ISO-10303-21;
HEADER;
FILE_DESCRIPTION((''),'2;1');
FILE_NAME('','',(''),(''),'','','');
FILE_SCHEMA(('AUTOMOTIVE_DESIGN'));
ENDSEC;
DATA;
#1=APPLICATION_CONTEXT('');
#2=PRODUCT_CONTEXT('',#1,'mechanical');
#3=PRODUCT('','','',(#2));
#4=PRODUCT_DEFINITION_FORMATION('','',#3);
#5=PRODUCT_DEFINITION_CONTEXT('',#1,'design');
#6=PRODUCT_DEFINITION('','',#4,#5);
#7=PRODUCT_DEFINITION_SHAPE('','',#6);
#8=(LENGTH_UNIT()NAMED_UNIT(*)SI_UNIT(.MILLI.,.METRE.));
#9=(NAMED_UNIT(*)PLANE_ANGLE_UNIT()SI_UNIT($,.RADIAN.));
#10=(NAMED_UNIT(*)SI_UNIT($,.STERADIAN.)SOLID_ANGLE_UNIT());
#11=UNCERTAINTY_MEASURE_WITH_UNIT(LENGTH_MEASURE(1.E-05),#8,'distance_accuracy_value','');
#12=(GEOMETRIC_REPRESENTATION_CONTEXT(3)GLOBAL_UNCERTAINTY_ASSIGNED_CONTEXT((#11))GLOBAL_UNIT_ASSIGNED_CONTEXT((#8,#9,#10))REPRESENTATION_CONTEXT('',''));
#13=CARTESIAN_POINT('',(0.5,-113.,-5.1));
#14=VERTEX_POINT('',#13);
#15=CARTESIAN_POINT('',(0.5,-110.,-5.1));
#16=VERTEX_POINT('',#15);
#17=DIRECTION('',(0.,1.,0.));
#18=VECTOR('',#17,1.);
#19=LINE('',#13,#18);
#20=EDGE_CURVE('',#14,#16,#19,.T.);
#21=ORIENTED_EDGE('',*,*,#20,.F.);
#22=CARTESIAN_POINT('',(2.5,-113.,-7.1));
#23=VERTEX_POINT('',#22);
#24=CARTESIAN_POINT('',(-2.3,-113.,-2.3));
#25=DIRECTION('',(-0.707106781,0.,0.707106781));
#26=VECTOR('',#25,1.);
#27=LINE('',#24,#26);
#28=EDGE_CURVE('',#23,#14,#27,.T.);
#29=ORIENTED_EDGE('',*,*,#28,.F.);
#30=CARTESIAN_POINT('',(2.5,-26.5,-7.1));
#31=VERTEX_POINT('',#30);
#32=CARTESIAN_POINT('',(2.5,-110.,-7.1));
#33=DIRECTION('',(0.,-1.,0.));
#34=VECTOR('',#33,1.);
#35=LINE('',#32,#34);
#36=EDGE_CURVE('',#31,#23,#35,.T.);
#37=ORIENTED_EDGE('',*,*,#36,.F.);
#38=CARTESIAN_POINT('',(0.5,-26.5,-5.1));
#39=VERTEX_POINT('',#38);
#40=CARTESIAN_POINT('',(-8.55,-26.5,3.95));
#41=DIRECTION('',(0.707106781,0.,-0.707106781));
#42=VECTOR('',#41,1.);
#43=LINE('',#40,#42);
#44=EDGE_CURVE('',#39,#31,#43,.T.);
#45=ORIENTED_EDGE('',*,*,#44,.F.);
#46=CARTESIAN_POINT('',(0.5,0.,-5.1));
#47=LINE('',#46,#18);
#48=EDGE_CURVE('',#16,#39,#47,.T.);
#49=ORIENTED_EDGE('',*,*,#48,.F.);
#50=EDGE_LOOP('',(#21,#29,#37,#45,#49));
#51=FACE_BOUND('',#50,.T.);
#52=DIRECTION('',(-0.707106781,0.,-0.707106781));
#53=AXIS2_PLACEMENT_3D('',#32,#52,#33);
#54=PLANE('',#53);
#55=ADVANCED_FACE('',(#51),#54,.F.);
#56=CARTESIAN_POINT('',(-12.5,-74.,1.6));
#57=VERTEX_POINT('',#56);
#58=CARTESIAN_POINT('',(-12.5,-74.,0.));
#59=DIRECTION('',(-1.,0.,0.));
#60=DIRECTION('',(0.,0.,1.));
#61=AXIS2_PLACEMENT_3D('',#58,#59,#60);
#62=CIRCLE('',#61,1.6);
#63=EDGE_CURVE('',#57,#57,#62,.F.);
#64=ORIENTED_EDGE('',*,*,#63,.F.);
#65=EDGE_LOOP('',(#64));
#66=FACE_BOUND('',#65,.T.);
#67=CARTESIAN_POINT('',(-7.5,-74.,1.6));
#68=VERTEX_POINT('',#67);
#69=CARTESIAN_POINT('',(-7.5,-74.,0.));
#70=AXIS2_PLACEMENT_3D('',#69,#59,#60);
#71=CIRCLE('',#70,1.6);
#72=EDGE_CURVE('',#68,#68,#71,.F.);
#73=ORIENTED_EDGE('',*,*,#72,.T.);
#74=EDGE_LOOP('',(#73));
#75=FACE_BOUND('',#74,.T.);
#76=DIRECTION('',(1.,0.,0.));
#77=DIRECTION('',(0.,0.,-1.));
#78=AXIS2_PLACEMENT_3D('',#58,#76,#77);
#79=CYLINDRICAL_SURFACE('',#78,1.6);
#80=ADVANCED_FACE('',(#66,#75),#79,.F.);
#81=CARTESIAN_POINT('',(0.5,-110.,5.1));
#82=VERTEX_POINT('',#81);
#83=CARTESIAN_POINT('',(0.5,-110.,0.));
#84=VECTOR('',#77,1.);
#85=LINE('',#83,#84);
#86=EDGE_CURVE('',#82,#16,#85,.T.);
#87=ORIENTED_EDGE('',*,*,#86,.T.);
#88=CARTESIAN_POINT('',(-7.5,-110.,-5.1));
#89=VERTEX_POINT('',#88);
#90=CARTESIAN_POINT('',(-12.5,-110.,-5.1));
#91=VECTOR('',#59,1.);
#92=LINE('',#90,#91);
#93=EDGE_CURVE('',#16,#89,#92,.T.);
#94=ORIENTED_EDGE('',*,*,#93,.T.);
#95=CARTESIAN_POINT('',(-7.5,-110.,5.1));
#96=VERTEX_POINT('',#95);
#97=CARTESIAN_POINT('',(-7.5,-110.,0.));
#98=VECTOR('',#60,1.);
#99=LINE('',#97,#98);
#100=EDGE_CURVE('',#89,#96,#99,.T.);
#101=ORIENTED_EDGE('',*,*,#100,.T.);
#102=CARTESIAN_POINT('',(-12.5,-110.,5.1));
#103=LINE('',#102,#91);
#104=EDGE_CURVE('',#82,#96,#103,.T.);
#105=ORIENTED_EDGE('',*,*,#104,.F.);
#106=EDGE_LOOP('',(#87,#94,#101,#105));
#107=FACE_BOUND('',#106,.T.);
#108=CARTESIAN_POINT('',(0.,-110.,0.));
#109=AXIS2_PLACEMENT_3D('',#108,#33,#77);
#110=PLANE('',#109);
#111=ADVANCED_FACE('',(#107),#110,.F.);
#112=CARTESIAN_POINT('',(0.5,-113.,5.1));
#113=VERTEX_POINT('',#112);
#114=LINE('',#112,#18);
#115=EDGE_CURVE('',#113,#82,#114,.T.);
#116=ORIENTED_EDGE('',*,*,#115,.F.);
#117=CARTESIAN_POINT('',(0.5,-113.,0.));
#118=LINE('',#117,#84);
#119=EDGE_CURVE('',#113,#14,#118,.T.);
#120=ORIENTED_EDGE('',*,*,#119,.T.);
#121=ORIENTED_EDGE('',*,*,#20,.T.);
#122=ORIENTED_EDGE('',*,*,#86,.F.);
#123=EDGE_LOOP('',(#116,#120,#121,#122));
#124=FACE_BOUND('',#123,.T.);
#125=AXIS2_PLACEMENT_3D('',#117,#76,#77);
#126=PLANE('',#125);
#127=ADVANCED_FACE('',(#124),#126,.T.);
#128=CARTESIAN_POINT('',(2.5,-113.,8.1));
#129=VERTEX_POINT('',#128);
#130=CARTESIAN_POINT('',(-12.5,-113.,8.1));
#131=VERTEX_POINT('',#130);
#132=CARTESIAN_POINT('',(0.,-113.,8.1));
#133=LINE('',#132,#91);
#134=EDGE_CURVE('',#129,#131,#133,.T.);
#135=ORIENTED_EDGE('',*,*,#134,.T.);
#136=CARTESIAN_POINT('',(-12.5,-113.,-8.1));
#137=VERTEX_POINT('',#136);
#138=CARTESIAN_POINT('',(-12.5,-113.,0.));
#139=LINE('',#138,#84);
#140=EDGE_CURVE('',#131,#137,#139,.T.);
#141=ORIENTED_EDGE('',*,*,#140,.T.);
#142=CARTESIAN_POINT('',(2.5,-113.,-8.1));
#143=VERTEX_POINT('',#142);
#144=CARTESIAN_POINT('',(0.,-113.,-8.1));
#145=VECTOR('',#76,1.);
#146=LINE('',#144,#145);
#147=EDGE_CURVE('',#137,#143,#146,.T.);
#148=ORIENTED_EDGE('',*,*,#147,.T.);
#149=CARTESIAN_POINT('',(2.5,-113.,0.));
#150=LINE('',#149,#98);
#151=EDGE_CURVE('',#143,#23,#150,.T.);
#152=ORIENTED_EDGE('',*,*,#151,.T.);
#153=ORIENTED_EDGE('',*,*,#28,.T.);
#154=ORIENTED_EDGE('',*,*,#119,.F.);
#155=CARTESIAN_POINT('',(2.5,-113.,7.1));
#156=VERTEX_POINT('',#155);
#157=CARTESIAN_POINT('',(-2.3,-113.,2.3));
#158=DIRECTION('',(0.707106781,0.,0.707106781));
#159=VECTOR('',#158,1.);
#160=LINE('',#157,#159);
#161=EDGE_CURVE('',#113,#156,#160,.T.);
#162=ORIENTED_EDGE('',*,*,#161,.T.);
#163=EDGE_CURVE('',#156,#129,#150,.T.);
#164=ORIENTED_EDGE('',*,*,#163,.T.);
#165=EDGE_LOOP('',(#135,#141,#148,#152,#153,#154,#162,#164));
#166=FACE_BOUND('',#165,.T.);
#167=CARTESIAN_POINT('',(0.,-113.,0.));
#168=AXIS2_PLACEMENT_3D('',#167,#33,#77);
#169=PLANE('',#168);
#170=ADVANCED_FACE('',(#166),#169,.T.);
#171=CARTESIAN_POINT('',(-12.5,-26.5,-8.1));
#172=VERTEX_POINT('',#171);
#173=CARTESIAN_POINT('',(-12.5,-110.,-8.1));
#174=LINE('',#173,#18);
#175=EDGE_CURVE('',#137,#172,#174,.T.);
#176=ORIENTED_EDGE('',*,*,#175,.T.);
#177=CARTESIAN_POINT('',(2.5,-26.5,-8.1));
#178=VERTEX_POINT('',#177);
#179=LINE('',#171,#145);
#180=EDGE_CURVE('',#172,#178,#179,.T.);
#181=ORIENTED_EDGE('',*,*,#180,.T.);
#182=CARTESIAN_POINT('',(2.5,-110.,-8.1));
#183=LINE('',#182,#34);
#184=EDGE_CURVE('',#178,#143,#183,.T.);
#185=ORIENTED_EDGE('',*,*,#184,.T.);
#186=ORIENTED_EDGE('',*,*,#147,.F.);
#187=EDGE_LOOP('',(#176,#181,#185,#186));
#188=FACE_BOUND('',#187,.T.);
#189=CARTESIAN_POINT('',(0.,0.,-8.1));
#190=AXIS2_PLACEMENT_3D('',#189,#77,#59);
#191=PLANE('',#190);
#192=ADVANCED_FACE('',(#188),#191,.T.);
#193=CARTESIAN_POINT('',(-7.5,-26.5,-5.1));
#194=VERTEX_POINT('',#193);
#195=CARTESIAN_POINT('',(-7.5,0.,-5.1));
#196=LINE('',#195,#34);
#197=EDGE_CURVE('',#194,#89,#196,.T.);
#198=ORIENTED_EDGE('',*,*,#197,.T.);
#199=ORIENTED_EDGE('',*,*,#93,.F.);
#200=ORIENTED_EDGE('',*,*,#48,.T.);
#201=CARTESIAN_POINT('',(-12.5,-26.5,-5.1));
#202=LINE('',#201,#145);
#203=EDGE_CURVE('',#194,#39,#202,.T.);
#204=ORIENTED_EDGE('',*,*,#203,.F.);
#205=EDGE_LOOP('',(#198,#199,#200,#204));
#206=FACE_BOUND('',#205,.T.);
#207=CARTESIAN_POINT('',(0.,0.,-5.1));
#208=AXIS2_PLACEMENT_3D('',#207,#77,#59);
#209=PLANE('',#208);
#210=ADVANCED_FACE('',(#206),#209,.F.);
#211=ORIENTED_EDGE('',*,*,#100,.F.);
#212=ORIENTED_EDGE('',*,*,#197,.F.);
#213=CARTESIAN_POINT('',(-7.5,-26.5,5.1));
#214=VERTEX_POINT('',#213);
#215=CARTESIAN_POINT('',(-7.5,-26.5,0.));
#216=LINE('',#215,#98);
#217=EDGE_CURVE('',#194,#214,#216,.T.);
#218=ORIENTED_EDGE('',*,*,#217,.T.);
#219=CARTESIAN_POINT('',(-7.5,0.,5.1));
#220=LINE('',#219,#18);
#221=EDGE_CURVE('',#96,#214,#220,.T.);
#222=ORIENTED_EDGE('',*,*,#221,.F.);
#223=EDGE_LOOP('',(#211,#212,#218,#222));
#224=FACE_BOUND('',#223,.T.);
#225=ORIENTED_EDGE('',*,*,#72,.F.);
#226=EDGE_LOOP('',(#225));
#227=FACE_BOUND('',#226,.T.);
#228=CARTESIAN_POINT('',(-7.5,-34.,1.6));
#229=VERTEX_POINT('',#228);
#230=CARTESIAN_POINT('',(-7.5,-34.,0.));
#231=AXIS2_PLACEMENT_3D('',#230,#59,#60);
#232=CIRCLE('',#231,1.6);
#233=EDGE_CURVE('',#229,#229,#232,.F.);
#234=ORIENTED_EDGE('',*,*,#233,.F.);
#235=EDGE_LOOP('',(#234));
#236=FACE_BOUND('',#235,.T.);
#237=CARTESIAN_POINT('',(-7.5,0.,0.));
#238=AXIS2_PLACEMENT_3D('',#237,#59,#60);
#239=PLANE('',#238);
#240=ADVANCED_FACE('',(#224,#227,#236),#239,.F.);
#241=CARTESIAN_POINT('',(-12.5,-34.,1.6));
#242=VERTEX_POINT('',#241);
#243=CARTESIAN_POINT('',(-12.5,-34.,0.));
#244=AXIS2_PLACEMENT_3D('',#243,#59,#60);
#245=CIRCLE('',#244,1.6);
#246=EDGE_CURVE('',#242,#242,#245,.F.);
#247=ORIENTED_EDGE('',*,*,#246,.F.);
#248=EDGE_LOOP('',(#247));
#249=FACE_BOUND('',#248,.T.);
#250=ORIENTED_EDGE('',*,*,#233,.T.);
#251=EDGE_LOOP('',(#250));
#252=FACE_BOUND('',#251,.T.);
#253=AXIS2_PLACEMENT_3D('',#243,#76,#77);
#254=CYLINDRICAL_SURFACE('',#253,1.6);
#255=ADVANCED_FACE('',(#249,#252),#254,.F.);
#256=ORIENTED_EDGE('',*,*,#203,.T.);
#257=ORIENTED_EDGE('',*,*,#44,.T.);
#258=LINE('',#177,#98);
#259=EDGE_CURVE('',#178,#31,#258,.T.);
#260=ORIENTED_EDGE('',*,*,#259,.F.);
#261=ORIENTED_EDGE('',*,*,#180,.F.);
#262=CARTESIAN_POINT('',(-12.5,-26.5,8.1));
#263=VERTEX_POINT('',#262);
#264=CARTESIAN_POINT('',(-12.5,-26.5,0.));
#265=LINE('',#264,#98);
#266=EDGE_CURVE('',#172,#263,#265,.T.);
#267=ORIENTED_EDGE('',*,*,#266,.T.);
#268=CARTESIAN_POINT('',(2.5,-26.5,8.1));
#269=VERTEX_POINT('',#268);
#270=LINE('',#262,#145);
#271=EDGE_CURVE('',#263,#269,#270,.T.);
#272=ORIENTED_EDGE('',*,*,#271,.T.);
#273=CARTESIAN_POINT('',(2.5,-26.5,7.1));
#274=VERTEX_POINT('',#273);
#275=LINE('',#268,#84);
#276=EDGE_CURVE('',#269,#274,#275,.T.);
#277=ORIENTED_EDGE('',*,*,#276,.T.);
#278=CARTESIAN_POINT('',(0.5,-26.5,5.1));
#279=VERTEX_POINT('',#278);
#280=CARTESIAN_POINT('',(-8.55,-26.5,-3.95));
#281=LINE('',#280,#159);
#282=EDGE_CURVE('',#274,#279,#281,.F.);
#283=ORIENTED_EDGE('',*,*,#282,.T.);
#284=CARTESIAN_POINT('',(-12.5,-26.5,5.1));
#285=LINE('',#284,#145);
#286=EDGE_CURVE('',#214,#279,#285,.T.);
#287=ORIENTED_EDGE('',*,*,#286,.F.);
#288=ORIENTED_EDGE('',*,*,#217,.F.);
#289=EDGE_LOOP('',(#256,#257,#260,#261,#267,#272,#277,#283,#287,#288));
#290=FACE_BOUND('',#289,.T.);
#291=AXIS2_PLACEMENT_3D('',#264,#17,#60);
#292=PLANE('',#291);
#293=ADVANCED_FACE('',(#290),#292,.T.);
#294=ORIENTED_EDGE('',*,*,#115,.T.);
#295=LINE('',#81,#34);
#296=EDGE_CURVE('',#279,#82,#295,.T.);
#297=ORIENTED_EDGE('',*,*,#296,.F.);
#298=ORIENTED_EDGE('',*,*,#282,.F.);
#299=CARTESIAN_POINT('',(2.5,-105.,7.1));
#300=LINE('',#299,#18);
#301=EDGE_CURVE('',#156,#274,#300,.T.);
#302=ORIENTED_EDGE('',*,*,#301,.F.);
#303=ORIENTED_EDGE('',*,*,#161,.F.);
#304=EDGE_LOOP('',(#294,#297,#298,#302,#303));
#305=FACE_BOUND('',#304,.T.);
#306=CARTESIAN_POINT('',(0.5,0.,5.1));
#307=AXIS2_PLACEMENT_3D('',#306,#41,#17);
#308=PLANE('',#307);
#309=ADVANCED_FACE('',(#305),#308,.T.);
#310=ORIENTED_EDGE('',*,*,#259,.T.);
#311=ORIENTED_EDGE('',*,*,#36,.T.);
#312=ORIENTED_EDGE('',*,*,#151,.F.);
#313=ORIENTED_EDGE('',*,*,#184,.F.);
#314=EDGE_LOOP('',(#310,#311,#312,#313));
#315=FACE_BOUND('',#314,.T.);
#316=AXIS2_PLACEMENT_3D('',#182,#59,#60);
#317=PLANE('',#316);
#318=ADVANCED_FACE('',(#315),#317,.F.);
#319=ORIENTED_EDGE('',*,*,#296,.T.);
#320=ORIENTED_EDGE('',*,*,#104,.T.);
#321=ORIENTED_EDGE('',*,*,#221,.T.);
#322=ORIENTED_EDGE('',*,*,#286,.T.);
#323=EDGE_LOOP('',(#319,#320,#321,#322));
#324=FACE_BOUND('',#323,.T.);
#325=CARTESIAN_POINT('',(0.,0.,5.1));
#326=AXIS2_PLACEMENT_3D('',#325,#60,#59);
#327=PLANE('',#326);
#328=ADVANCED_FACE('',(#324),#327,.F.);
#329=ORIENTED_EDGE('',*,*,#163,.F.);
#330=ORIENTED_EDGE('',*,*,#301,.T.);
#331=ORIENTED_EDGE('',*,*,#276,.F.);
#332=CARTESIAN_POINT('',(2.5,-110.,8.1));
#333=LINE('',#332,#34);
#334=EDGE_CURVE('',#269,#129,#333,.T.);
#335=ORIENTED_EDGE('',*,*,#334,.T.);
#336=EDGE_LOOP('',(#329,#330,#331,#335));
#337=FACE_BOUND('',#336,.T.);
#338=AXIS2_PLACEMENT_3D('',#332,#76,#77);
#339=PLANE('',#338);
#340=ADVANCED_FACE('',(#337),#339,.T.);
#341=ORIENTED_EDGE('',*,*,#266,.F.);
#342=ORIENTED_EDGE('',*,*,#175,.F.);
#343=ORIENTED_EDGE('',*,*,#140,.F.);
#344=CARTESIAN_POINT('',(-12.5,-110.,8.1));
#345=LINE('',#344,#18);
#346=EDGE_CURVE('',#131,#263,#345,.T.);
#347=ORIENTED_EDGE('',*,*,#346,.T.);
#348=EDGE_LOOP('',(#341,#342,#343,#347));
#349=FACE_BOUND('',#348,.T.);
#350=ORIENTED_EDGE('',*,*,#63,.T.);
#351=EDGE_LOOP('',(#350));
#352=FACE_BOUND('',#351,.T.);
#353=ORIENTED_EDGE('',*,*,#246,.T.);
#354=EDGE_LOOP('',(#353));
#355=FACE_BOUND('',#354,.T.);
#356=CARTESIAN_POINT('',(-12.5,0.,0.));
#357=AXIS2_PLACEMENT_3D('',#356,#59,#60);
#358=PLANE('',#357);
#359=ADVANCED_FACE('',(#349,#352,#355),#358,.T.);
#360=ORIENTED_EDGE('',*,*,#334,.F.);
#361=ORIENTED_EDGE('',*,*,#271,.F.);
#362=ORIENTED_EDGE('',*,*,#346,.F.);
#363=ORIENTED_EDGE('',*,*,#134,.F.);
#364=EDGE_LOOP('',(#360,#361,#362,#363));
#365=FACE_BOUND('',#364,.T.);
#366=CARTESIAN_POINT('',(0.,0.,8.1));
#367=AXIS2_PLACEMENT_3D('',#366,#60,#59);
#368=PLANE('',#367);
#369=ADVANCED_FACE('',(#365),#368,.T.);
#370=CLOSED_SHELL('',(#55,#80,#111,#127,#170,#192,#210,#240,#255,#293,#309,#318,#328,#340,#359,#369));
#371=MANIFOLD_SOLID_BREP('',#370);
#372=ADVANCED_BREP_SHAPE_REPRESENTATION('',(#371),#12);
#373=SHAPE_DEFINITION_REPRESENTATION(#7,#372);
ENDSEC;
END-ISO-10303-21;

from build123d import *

# Parameters (mm, degrees)
SKETCH_1_W            = 10
SKETCH_1_H            = 83.5
SKETCH_1_R            = 1.6
EXTRUDE_1_DEPTH       = 5
MOVE_START            = -5.1
MOVE_FACE_1_OUTLINE_W = 5
MOVE_FACE_1_OUTLINE_H = 83.5
MOVE_FACE_1_DEPTH     = 0.1
SKETCH_2_W            = 15
SKETCH_2_H            = 5
EXTRUDE_2_DEPTH       = 3
MOVE_START_2          = 5
MOVE_FACE_2_OUTLINE_W = 5
MOVE_FACE_2_OUTLINE_H = 83.5
MOVE_FACE_2_DEPTH     = 0.1
CHAMFER_1_SIZE        = 2
SKETCH_3_W            = 8
SKETCH_3_H            = 10.2
EXTRUDE_3_DEPTH       = 3
EXTRUDE_4_DEPTH       = 73.5


# Read off the part's stored shape, not the designer's step: 面の移動1, 面の移動2
with BuildPart() as part:
    # ｽｹｯﾁ1 → ﾎﾞｽ - 押し出し1 (new body)
    with BuildSketch(Plane.ZY.offset(7.5)):
        with Locations((0, -68.25)):
            Rectangle(SKETCH_1_W, SKETCH_1_H)
        with Locations((0, -74)):
            Circle(SKETCH_1_R, mode=Mode.SUBTRACT)
        with Locations((0, -34)):
            Circle(SKETCH_1_R, mode=Mode.SUBTRACT)
    extrude(amount=EXTRUDE_1_DEPTH)

    # Move Face 1 outline → Move Face 1 (add)
    with BuildSketch(Plane.XY.offset(MOVE_START)):
        with Locations((-10, -68.25)):
            Rectangle(MOVE_FACE_1_OUTLINE_W, MOVE_FACE_1_OUTLINE_H)
    extrude(amount=MOVE_FACE_1_DEPTH)

    # ｽｹｯﾁ2 → ﾎﾞｽ - 押し出し2 (add)
    with BuildSketch(Plane(origin=(0, 0, -5.1), x_dir=(-1, 0, 0), z_dir=(0, 0, -1))):
        with Locations((5, -107.5)):
            Rectangle(SKETCH_2_W, SKETCH_2_H)
        with Locations((5, -29)):
            Rectangle(SKETCH_2_W, SKETCH_2_H)
        with Locations((5, -68.25)):
            Rectangle(SKETCH_2_W, SKETCH_2_H)
    extrude_2 = extrude(amount=EXTRUDE_2_DEPTH)

    # Move Face 2 outline → Move Face 2 (add)
    with BuildSketch(Plane.XY.offset(MOVE_START_2)):
        with Locations((-10, -68.25)):
            Rectangle(MOVE_FACE_2_OUTLINE_W, MOVE_FACE_2_OUTLINE_H)
    extrude(amount=MOVE_FACE_2_DEPTH)

    # ﾐﾗｰ2: ﾎﾞｽ - 押し出し2 across plane
    add(extrude_2.mirror(Plane.XY))

    # 面取り1
    chamfer_1_edges = [part.edges().sort_by_distance(p)[0] for p in [
        (2.5, -107.5, -5.1),
        (2.5, -29, -5.1),
        (2.5, -68.25, -5.1),
        (2.5, -107.5, 5.1),
        (2.5, -29, 5.1),
        (2.5, -68.25, 5.1),
    ]]
    chamfer(chamfer_1_edges, length=CHAMFER_1_SIZE)

    # ｽｹｯﾁ3 → ﾎﾞｽ - 押し出し3 (add)
    with BuildSketch(Plane.XZ.offset(110)):
        Polygon((-7.5, -5.1), (-7.5, 5.1), (0.5, 5.1), (2.5, 7.1), (2.5, 8.1), (-12.5, 8.1), (-12.5, -8.1), (2.5, -8.1), (2.5, -7.1), (0.5, -5.1), align=None)
        with Locations((-3.5, 0)):
            Rectangle(SKETCH_3_W, SKETCH_3_H)
    extrude(amount=EXTRUDE_3_DEPTH)

    # ｽｹｯﾁ4 → ﾎﾞｽ - 押し出し4 (add)
    with BuildSketch(Plane.XZ.offset(31.5)):
        Polygon((-7.5, 5.1), (0.5, 5.1), (2.5, 7.1), (2.5, 8.1), (-12.5, 8.1), (-12.5, 5.1), align=None)
        Polygon((2.5, -8.1), (2.5, -7.1), (0.5, -5.1), (-7.5, -5.1), (-12.5, -5.1), (-12.5, -8.1), align=None)
    extrude(amount=EXTRUDE_4_DEPTH)


solid = part.part
